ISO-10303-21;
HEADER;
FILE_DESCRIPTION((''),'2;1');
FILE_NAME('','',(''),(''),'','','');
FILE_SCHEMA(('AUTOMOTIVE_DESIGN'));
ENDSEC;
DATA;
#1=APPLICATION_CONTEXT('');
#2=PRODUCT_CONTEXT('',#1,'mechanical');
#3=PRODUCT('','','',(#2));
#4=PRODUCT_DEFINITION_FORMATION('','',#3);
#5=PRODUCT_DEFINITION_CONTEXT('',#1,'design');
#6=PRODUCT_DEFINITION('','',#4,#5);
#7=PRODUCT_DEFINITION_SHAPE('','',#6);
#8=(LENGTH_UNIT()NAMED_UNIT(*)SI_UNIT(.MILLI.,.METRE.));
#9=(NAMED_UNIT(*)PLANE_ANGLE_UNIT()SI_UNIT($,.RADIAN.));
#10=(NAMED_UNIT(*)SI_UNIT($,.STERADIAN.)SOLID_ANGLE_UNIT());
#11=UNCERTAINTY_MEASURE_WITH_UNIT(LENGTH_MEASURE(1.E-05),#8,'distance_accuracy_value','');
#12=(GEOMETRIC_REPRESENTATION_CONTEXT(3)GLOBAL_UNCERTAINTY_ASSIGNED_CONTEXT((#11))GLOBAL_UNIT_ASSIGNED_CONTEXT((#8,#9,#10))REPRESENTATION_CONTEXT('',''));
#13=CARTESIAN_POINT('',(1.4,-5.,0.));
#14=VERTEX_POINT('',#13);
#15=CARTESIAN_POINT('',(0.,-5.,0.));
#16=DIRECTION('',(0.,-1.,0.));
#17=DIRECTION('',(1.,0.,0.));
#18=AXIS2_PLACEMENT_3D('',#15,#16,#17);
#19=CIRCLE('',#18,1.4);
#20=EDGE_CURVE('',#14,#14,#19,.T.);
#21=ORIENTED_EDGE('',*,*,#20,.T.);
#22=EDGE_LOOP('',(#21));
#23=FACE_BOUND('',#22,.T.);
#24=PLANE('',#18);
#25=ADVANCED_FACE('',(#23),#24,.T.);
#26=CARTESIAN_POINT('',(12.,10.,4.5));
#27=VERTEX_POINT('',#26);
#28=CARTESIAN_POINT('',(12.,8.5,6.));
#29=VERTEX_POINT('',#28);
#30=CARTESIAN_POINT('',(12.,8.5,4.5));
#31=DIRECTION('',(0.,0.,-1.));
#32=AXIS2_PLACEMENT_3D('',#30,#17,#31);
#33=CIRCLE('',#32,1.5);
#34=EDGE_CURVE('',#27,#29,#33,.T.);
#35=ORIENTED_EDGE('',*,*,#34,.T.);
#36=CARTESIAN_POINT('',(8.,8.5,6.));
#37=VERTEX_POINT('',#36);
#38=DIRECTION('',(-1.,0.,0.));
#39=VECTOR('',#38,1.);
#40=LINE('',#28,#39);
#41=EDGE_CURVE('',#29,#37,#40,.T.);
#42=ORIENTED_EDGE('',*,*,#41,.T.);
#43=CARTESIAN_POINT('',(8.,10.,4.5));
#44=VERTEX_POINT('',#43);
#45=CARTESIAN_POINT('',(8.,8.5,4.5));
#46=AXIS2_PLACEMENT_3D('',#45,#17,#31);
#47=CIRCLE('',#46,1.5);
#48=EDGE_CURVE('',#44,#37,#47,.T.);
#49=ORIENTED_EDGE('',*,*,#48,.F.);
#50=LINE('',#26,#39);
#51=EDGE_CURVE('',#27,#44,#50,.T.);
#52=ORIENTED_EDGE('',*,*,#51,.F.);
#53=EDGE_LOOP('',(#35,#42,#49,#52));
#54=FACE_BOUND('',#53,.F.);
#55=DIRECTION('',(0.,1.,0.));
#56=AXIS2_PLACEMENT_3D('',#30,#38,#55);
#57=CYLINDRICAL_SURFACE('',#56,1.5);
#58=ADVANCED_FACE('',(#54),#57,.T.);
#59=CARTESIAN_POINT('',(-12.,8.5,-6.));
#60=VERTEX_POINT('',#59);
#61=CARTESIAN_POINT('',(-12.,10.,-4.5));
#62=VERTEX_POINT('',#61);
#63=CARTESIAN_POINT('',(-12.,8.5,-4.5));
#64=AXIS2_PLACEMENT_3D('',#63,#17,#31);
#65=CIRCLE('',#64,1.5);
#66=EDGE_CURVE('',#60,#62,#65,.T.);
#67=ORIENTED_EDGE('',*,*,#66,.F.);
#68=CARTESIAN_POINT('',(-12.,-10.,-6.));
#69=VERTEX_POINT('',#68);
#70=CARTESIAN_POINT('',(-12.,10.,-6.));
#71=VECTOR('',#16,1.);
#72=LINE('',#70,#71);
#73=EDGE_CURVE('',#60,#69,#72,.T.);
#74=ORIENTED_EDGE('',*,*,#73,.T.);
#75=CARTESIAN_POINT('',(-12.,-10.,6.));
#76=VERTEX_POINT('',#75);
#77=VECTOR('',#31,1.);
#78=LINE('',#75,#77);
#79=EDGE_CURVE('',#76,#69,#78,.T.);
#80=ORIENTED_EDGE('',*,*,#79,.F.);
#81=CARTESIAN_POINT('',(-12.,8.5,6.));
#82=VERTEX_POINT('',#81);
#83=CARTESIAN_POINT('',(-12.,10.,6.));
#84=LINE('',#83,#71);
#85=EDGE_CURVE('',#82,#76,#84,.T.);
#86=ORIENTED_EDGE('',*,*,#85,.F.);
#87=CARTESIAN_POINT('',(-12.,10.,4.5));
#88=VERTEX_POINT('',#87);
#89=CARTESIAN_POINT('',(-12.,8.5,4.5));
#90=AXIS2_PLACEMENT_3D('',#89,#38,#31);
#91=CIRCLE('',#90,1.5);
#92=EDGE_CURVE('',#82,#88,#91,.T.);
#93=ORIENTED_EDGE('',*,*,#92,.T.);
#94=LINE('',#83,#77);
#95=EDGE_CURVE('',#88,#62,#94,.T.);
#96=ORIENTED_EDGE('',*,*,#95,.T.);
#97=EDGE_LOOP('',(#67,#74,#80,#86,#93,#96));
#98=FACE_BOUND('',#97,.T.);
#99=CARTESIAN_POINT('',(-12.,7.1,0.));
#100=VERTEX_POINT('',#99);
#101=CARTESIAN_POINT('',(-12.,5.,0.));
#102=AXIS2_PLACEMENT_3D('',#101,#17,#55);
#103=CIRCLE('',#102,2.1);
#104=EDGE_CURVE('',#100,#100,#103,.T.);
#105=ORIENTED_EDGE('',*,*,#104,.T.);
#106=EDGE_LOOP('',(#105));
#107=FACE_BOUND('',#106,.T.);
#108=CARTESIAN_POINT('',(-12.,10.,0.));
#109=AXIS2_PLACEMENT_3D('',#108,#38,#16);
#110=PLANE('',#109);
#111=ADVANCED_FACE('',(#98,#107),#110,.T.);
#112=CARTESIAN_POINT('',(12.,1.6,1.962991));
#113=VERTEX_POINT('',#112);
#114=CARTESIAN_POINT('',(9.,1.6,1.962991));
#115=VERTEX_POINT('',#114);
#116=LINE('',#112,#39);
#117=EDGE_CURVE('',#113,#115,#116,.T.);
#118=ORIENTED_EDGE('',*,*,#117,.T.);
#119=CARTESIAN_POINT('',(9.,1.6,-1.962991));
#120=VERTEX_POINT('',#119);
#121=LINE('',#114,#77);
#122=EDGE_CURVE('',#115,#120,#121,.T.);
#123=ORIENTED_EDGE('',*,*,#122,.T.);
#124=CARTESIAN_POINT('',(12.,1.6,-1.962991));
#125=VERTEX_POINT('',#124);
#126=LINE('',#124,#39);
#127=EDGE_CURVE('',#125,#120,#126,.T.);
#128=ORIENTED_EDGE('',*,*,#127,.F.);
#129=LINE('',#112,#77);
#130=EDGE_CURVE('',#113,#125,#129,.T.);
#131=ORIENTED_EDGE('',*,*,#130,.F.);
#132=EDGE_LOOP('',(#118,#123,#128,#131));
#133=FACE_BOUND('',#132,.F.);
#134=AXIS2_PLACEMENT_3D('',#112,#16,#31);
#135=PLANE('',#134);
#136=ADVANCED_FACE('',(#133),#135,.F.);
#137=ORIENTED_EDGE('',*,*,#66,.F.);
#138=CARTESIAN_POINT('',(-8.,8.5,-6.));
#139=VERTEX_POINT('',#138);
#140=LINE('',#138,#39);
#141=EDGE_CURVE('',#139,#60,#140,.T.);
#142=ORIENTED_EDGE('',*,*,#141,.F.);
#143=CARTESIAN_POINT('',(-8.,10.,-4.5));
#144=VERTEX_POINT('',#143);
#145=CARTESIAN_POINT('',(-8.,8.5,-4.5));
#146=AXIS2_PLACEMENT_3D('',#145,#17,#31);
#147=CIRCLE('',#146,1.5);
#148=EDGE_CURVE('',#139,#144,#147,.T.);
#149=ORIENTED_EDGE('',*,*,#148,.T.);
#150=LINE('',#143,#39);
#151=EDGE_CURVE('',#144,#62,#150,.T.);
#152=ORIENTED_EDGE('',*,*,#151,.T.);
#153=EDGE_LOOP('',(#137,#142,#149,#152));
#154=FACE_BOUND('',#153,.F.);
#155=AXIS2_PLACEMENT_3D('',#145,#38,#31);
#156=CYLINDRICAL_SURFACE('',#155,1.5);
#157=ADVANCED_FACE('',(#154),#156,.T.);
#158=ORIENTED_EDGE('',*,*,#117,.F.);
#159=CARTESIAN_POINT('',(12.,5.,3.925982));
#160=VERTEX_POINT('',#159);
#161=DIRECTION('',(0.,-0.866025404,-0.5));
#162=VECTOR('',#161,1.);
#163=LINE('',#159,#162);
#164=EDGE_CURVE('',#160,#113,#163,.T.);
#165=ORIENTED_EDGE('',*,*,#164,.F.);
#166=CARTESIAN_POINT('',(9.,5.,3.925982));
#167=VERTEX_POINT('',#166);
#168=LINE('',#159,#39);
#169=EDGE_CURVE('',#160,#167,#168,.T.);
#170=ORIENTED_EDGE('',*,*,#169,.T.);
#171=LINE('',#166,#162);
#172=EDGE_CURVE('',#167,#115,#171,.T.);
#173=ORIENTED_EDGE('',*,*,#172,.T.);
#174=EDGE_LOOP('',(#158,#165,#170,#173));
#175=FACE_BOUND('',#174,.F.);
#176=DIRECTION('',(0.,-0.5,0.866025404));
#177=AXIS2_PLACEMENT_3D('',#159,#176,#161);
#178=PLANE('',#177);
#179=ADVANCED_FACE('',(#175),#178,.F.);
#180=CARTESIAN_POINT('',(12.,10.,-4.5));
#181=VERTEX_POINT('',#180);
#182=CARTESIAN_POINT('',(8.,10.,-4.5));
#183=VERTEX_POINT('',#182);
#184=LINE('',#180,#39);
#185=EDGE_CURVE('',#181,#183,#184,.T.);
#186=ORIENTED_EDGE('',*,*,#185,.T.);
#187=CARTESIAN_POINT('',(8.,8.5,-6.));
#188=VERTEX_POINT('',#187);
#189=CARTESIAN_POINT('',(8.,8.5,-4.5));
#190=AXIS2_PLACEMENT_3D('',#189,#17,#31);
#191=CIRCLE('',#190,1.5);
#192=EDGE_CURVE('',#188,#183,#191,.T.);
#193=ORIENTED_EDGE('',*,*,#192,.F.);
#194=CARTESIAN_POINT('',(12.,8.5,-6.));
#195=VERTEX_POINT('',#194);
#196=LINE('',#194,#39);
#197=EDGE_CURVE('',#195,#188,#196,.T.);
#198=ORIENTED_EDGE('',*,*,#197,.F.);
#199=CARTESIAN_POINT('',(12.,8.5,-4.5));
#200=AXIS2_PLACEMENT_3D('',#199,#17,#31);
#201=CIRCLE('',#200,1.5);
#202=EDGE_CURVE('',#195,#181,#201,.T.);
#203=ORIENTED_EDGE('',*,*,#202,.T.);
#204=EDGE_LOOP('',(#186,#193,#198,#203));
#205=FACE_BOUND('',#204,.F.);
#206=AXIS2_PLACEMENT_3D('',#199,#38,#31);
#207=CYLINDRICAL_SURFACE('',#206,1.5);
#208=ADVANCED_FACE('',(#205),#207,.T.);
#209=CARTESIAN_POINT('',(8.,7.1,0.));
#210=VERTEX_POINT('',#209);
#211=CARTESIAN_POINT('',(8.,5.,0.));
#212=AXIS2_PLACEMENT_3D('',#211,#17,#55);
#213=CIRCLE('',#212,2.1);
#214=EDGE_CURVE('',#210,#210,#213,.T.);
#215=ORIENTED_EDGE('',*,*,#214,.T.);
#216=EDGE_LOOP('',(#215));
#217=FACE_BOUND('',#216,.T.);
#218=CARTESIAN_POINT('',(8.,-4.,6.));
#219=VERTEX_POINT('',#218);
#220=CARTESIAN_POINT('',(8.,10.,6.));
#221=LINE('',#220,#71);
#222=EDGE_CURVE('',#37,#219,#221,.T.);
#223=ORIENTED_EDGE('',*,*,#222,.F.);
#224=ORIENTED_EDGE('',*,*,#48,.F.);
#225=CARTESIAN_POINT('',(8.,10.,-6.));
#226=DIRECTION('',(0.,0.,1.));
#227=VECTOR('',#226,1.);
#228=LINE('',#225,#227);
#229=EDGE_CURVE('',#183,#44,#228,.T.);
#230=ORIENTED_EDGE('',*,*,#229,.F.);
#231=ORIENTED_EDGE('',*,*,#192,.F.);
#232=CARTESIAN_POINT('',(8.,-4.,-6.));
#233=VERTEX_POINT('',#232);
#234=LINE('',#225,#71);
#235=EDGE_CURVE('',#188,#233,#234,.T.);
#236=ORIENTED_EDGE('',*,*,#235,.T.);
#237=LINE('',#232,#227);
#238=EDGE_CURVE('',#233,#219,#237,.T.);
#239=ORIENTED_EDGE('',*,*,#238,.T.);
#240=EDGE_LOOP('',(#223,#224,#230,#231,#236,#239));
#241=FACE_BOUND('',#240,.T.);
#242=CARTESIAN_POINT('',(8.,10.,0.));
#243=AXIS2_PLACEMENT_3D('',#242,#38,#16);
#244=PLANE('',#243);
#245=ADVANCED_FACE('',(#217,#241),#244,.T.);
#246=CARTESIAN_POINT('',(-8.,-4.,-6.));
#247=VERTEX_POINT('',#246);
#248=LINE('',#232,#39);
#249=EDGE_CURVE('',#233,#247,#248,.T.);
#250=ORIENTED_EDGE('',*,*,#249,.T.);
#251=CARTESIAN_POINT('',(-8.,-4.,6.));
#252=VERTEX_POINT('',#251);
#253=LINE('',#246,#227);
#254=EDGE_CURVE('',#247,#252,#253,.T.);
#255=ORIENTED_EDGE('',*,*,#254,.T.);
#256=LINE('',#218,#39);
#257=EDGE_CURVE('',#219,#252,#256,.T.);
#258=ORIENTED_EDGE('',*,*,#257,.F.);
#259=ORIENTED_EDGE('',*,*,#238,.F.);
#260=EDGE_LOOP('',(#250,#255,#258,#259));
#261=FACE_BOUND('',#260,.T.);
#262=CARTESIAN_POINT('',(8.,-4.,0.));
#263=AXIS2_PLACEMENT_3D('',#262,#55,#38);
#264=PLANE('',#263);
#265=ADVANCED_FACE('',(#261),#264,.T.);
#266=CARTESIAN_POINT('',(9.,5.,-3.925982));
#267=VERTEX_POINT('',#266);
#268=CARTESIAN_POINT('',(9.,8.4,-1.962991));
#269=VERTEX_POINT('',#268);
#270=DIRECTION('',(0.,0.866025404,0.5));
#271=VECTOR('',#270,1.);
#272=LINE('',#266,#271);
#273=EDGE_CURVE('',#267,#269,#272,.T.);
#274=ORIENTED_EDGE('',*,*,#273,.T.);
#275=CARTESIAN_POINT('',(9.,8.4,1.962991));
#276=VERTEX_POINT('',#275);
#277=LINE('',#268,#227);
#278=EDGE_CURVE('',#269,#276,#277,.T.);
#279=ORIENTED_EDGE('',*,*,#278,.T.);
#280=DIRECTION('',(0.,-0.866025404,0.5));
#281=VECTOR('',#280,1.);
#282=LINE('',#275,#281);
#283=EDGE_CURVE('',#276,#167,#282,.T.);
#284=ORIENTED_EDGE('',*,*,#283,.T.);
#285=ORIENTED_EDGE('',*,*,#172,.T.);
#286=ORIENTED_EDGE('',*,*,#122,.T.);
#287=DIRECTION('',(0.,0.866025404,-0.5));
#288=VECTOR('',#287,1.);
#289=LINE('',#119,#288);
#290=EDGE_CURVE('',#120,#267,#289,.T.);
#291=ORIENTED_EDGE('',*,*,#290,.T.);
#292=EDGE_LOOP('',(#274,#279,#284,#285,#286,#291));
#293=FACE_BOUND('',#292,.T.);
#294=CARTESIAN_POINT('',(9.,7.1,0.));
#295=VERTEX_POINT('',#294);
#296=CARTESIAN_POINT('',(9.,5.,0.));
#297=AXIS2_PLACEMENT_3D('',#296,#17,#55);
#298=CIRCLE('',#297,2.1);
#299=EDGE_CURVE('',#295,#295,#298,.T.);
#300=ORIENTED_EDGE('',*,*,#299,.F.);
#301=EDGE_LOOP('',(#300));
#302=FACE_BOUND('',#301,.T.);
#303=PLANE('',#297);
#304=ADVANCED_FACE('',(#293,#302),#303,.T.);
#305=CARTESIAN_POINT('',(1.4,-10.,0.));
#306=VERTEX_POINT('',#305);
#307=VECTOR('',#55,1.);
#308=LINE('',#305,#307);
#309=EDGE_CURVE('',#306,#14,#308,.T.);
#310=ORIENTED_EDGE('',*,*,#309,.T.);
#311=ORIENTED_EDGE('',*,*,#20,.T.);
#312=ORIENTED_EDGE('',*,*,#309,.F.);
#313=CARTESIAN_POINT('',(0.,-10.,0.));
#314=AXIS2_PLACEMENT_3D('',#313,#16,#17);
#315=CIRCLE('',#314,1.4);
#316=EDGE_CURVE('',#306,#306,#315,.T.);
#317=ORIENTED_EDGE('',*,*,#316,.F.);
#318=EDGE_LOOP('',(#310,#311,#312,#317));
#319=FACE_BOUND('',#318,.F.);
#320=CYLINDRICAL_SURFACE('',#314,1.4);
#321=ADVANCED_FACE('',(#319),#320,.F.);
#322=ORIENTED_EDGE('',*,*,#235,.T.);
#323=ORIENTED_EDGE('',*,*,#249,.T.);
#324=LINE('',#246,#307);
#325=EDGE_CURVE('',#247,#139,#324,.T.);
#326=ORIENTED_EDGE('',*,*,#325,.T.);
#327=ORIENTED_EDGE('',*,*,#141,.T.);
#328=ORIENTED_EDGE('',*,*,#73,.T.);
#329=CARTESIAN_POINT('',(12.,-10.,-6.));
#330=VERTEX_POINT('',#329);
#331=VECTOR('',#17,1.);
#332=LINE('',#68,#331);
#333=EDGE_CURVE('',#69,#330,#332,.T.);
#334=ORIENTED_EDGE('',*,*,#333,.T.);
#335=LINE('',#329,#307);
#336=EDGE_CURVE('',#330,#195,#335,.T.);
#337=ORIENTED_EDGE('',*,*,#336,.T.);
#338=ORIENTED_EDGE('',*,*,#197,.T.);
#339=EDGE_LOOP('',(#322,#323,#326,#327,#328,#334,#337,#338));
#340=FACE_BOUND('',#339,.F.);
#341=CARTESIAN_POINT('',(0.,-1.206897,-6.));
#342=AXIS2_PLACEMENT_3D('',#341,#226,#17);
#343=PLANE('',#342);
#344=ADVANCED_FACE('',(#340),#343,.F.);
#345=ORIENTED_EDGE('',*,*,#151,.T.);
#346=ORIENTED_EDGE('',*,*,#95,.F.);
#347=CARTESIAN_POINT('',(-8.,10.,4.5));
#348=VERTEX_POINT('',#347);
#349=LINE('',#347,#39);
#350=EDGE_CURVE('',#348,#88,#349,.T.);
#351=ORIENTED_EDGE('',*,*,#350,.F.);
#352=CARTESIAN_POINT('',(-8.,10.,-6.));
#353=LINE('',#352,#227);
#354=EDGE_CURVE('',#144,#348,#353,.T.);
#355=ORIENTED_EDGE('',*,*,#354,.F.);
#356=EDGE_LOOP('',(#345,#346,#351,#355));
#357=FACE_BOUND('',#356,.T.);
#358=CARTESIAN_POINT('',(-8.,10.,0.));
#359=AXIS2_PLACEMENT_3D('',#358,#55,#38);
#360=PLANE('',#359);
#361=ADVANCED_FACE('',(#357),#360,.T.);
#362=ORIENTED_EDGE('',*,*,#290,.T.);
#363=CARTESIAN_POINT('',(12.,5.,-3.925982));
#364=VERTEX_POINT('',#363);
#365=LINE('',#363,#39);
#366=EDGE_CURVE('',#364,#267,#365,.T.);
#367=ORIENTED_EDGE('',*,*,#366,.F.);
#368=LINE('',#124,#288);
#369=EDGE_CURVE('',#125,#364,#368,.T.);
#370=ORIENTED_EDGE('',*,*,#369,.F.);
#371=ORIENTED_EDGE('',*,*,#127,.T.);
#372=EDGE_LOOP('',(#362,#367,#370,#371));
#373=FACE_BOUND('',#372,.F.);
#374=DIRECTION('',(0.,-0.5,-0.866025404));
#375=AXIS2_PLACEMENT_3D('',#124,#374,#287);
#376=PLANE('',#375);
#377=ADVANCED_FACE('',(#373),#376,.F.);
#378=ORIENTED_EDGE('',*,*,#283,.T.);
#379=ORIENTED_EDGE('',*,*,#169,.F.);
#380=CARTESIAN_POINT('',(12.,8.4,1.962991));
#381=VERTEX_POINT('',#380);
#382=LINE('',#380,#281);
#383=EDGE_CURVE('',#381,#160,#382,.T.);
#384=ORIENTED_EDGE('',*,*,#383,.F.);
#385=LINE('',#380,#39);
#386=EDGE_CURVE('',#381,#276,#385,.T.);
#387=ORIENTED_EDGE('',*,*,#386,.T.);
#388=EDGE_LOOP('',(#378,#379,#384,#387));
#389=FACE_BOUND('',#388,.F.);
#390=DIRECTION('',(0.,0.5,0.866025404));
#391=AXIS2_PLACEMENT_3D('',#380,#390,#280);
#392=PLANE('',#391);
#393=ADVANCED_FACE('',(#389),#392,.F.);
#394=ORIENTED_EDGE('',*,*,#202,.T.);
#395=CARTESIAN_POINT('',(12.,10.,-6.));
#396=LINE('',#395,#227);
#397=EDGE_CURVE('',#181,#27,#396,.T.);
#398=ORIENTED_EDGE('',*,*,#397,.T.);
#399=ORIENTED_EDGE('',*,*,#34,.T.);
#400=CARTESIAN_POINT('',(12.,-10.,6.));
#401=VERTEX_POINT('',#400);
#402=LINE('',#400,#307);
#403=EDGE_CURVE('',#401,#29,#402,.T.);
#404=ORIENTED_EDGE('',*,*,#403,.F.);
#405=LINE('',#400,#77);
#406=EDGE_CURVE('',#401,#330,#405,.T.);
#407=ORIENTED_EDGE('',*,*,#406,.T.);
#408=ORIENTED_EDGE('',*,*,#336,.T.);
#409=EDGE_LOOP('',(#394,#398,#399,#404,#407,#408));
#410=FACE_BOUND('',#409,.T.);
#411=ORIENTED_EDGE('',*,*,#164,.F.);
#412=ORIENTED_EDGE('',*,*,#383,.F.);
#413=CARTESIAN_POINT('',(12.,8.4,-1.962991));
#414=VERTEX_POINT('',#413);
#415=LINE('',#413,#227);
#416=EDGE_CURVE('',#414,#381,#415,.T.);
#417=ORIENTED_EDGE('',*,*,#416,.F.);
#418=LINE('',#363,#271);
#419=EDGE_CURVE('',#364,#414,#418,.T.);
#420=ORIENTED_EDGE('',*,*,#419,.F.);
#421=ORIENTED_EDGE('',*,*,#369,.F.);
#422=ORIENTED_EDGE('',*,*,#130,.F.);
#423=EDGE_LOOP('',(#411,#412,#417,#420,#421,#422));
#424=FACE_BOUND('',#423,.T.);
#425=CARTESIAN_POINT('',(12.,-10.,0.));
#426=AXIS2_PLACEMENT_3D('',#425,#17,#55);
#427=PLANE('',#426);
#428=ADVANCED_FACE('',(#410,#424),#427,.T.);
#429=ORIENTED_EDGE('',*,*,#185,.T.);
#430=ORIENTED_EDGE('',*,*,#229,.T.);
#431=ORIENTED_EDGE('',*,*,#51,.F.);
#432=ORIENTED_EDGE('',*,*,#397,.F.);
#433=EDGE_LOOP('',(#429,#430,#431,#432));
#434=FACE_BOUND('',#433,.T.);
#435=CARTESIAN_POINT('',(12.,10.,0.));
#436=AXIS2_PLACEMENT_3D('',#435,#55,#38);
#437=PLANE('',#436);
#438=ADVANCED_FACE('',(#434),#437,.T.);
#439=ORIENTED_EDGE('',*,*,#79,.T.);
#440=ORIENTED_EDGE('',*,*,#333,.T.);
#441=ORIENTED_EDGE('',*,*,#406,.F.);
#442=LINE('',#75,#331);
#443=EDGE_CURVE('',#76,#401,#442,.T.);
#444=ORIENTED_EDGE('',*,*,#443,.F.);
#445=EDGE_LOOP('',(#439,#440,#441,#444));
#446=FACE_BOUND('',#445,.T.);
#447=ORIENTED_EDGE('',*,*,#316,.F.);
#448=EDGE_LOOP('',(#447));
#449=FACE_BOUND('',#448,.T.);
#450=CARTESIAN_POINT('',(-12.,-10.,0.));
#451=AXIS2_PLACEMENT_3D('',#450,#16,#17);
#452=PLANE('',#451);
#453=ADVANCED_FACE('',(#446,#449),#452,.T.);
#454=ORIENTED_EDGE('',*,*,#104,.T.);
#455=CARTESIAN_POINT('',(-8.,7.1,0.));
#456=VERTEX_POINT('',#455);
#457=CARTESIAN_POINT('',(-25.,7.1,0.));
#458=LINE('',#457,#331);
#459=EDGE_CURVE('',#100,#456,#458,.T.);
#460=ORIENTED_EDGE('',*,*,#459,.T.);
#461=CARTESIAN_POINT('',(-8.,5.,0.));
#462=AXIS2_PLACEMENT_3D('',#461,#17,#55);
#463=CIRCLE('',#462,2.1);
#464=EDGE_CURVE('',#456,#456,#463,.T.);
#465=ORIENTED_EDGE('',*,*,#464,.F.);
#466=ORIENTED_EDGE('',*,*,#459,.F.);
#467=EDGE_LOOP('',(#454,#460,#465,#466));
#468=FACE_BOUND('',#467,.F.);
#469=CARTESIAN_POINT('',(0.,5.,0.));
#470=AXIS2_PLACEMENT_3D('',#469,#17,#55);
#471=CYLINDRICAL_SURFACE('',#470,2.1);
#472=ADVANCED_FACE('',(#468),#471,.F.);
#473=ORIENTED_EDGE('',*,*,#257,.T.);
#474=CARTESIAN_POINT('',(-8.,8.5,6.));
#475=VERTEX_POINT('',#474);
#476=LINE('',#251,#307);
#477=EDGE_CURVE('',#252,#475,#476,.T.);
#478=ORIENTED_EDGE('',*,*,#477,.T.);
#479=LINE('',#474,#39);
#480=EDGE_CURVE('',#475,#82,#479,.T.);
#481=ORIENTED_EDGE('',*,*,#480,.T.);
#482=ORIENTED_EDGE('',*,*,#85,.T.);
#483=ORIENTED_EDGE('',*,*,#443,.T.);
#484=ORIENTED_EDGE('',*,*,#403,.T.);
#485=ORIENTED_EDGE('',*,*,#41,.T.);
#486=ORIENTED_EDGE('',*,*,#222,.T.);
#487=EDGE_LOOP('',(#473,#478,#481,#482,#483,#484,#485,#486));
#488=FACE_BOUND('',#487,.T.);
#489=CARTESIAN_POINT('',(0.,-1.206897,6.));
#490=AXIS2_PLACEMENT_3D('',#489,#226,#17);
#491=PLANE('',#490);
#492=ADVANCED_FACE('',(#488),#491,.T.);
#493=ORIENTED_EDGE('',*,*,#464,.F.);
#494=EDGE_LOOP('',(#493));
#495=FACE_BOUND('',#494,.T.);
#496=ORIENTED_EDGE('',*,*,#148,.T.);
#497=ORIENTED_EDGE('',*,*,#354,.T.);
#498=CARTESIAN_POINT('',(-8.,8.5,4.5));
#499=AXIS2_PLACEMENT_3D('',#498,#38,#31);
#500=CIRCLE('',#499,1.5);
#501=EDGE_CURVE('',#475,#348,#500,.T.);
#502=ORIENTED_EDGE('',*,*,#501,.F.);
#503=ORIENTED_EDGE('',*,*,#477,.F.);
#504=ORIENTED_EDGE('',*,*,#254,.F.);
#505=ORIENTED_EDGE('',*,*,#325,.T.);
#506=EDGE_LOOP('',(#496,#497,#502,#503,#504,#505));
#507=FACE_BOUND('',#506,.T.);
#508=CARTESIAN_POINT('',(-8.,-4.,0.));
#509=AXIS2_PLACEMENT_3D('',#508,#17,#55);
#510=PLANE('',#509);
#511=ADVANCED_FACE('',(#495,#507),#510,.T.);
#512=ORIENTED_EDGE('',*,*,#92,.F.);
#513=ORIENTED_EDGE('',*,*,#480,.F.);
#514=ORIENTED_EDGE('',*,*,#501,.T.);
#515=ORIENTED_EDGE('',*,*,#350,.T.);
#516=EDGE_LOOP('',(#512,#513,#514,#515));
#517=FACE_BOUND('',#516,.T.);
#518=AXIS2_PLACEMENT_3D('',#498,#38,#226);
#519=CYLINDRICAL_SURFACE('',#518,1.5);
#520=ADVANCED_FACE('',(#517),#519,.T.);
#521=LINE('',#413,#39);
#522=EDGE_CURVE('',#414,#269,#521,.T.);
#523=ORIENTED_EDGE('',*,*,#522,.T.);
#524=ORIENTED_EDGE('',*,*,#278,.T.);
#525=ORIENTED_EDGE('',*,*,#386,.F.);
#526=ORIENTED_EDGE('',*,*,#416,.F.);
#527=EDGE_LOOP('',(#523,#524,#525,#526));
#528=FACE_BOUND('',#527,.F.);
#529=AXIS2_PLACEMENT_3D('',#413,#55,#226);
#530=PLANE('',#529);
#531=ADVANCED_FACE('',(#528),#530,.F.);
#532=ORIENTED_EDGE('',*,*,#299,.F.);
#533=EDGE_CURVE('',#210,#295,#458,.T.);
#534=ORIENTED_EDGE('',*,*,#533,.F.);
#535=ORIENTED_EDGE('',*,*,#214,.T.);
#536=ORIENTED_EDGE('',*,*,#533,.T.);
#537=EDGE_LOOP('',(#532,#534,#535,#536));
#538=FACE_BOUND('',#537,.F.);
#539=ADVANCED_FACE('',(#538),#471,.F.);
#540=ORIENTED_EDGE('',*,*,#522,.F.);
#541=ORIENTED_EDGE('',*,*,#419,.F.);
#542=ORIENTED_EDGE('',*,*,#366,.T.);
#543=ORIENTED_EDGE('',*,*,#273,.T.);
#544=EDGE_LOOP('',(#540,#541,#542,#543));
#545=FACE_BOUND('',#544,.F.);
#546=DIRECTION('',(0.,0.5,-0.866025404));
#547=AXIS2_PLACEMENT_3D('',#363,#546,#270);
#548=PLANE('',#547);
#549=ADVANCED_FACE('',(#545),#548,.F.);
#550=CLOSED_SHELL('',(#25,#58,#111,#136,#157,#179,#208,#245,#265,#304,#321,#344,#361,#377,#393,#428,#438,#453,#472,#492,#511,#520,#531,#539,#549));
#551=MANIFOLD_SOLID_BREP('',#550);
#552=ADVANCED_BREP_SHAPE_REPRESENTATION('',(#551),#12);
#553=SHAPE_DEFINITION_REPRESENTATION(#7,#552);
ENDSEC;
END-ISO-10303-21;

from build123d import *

# Parameters (mm, degrees)
F1_DEPTH  = 6
F2_R      = 2.1
F3_DEPTH  = 25
F6_DEPTH  = 3
F7_R      = 1.5
F9_R      = 1.4
F10_DEPTH = 5


with BuildPart() as f1:
    # F0 (on Top) → F1 (new body, symmetric)
    with BuildSketch(Plane.XY):
        Polygon((12, -10), (12, 10), (8, 10), (8, -4), (0, -4), (-8, -4), (-8, 10), (-12, 10), (-12, -10), align=None)
    extrude(amount=F1_DEPTH, both=True)

    # F2 (on Right) → F3 (cut, symmetric)
    with BuildSketch(Plane.YZ):
        with Locations((5, 0)):
            Circle(F2_R)
    extrude(amount=F3_DEPTH, both=True, mode=Mode.SUBTRACT)

    # F5 (on offset) → F6 (cut)
    with BuildSketch(Plane.YZ.offset(12)):
        Polygon((5, -3.9259818305), (8.4, -1.9629909152), (8.4, 1.9629909152), (5, 3.9259818305), (1.6, 1.9629909152), (1.6, -1.9629909152), align=None)
    extrude(amount=-F6_DEPTH, mode=Mode.SUBTRACT)

    # F7
    f7_edges = [f1.edges().sort_by_distance(p)[0] for p in [
        (10, 10, -6),
        (10, 10, 6),
        (-10, 10, -6),
        (-10, 10, 6),
    ]]
    fillet(f7_edges, radius=F7_R)

    # F9 (on offset) → F10 (cut)
    with BuildSketch(Plane.XZ.offset(10)):
        Circle(F9_R)
    extrude(amount=-F10_DEPTH, mode=Mode.SUBTRACT)


solid = f1.part
